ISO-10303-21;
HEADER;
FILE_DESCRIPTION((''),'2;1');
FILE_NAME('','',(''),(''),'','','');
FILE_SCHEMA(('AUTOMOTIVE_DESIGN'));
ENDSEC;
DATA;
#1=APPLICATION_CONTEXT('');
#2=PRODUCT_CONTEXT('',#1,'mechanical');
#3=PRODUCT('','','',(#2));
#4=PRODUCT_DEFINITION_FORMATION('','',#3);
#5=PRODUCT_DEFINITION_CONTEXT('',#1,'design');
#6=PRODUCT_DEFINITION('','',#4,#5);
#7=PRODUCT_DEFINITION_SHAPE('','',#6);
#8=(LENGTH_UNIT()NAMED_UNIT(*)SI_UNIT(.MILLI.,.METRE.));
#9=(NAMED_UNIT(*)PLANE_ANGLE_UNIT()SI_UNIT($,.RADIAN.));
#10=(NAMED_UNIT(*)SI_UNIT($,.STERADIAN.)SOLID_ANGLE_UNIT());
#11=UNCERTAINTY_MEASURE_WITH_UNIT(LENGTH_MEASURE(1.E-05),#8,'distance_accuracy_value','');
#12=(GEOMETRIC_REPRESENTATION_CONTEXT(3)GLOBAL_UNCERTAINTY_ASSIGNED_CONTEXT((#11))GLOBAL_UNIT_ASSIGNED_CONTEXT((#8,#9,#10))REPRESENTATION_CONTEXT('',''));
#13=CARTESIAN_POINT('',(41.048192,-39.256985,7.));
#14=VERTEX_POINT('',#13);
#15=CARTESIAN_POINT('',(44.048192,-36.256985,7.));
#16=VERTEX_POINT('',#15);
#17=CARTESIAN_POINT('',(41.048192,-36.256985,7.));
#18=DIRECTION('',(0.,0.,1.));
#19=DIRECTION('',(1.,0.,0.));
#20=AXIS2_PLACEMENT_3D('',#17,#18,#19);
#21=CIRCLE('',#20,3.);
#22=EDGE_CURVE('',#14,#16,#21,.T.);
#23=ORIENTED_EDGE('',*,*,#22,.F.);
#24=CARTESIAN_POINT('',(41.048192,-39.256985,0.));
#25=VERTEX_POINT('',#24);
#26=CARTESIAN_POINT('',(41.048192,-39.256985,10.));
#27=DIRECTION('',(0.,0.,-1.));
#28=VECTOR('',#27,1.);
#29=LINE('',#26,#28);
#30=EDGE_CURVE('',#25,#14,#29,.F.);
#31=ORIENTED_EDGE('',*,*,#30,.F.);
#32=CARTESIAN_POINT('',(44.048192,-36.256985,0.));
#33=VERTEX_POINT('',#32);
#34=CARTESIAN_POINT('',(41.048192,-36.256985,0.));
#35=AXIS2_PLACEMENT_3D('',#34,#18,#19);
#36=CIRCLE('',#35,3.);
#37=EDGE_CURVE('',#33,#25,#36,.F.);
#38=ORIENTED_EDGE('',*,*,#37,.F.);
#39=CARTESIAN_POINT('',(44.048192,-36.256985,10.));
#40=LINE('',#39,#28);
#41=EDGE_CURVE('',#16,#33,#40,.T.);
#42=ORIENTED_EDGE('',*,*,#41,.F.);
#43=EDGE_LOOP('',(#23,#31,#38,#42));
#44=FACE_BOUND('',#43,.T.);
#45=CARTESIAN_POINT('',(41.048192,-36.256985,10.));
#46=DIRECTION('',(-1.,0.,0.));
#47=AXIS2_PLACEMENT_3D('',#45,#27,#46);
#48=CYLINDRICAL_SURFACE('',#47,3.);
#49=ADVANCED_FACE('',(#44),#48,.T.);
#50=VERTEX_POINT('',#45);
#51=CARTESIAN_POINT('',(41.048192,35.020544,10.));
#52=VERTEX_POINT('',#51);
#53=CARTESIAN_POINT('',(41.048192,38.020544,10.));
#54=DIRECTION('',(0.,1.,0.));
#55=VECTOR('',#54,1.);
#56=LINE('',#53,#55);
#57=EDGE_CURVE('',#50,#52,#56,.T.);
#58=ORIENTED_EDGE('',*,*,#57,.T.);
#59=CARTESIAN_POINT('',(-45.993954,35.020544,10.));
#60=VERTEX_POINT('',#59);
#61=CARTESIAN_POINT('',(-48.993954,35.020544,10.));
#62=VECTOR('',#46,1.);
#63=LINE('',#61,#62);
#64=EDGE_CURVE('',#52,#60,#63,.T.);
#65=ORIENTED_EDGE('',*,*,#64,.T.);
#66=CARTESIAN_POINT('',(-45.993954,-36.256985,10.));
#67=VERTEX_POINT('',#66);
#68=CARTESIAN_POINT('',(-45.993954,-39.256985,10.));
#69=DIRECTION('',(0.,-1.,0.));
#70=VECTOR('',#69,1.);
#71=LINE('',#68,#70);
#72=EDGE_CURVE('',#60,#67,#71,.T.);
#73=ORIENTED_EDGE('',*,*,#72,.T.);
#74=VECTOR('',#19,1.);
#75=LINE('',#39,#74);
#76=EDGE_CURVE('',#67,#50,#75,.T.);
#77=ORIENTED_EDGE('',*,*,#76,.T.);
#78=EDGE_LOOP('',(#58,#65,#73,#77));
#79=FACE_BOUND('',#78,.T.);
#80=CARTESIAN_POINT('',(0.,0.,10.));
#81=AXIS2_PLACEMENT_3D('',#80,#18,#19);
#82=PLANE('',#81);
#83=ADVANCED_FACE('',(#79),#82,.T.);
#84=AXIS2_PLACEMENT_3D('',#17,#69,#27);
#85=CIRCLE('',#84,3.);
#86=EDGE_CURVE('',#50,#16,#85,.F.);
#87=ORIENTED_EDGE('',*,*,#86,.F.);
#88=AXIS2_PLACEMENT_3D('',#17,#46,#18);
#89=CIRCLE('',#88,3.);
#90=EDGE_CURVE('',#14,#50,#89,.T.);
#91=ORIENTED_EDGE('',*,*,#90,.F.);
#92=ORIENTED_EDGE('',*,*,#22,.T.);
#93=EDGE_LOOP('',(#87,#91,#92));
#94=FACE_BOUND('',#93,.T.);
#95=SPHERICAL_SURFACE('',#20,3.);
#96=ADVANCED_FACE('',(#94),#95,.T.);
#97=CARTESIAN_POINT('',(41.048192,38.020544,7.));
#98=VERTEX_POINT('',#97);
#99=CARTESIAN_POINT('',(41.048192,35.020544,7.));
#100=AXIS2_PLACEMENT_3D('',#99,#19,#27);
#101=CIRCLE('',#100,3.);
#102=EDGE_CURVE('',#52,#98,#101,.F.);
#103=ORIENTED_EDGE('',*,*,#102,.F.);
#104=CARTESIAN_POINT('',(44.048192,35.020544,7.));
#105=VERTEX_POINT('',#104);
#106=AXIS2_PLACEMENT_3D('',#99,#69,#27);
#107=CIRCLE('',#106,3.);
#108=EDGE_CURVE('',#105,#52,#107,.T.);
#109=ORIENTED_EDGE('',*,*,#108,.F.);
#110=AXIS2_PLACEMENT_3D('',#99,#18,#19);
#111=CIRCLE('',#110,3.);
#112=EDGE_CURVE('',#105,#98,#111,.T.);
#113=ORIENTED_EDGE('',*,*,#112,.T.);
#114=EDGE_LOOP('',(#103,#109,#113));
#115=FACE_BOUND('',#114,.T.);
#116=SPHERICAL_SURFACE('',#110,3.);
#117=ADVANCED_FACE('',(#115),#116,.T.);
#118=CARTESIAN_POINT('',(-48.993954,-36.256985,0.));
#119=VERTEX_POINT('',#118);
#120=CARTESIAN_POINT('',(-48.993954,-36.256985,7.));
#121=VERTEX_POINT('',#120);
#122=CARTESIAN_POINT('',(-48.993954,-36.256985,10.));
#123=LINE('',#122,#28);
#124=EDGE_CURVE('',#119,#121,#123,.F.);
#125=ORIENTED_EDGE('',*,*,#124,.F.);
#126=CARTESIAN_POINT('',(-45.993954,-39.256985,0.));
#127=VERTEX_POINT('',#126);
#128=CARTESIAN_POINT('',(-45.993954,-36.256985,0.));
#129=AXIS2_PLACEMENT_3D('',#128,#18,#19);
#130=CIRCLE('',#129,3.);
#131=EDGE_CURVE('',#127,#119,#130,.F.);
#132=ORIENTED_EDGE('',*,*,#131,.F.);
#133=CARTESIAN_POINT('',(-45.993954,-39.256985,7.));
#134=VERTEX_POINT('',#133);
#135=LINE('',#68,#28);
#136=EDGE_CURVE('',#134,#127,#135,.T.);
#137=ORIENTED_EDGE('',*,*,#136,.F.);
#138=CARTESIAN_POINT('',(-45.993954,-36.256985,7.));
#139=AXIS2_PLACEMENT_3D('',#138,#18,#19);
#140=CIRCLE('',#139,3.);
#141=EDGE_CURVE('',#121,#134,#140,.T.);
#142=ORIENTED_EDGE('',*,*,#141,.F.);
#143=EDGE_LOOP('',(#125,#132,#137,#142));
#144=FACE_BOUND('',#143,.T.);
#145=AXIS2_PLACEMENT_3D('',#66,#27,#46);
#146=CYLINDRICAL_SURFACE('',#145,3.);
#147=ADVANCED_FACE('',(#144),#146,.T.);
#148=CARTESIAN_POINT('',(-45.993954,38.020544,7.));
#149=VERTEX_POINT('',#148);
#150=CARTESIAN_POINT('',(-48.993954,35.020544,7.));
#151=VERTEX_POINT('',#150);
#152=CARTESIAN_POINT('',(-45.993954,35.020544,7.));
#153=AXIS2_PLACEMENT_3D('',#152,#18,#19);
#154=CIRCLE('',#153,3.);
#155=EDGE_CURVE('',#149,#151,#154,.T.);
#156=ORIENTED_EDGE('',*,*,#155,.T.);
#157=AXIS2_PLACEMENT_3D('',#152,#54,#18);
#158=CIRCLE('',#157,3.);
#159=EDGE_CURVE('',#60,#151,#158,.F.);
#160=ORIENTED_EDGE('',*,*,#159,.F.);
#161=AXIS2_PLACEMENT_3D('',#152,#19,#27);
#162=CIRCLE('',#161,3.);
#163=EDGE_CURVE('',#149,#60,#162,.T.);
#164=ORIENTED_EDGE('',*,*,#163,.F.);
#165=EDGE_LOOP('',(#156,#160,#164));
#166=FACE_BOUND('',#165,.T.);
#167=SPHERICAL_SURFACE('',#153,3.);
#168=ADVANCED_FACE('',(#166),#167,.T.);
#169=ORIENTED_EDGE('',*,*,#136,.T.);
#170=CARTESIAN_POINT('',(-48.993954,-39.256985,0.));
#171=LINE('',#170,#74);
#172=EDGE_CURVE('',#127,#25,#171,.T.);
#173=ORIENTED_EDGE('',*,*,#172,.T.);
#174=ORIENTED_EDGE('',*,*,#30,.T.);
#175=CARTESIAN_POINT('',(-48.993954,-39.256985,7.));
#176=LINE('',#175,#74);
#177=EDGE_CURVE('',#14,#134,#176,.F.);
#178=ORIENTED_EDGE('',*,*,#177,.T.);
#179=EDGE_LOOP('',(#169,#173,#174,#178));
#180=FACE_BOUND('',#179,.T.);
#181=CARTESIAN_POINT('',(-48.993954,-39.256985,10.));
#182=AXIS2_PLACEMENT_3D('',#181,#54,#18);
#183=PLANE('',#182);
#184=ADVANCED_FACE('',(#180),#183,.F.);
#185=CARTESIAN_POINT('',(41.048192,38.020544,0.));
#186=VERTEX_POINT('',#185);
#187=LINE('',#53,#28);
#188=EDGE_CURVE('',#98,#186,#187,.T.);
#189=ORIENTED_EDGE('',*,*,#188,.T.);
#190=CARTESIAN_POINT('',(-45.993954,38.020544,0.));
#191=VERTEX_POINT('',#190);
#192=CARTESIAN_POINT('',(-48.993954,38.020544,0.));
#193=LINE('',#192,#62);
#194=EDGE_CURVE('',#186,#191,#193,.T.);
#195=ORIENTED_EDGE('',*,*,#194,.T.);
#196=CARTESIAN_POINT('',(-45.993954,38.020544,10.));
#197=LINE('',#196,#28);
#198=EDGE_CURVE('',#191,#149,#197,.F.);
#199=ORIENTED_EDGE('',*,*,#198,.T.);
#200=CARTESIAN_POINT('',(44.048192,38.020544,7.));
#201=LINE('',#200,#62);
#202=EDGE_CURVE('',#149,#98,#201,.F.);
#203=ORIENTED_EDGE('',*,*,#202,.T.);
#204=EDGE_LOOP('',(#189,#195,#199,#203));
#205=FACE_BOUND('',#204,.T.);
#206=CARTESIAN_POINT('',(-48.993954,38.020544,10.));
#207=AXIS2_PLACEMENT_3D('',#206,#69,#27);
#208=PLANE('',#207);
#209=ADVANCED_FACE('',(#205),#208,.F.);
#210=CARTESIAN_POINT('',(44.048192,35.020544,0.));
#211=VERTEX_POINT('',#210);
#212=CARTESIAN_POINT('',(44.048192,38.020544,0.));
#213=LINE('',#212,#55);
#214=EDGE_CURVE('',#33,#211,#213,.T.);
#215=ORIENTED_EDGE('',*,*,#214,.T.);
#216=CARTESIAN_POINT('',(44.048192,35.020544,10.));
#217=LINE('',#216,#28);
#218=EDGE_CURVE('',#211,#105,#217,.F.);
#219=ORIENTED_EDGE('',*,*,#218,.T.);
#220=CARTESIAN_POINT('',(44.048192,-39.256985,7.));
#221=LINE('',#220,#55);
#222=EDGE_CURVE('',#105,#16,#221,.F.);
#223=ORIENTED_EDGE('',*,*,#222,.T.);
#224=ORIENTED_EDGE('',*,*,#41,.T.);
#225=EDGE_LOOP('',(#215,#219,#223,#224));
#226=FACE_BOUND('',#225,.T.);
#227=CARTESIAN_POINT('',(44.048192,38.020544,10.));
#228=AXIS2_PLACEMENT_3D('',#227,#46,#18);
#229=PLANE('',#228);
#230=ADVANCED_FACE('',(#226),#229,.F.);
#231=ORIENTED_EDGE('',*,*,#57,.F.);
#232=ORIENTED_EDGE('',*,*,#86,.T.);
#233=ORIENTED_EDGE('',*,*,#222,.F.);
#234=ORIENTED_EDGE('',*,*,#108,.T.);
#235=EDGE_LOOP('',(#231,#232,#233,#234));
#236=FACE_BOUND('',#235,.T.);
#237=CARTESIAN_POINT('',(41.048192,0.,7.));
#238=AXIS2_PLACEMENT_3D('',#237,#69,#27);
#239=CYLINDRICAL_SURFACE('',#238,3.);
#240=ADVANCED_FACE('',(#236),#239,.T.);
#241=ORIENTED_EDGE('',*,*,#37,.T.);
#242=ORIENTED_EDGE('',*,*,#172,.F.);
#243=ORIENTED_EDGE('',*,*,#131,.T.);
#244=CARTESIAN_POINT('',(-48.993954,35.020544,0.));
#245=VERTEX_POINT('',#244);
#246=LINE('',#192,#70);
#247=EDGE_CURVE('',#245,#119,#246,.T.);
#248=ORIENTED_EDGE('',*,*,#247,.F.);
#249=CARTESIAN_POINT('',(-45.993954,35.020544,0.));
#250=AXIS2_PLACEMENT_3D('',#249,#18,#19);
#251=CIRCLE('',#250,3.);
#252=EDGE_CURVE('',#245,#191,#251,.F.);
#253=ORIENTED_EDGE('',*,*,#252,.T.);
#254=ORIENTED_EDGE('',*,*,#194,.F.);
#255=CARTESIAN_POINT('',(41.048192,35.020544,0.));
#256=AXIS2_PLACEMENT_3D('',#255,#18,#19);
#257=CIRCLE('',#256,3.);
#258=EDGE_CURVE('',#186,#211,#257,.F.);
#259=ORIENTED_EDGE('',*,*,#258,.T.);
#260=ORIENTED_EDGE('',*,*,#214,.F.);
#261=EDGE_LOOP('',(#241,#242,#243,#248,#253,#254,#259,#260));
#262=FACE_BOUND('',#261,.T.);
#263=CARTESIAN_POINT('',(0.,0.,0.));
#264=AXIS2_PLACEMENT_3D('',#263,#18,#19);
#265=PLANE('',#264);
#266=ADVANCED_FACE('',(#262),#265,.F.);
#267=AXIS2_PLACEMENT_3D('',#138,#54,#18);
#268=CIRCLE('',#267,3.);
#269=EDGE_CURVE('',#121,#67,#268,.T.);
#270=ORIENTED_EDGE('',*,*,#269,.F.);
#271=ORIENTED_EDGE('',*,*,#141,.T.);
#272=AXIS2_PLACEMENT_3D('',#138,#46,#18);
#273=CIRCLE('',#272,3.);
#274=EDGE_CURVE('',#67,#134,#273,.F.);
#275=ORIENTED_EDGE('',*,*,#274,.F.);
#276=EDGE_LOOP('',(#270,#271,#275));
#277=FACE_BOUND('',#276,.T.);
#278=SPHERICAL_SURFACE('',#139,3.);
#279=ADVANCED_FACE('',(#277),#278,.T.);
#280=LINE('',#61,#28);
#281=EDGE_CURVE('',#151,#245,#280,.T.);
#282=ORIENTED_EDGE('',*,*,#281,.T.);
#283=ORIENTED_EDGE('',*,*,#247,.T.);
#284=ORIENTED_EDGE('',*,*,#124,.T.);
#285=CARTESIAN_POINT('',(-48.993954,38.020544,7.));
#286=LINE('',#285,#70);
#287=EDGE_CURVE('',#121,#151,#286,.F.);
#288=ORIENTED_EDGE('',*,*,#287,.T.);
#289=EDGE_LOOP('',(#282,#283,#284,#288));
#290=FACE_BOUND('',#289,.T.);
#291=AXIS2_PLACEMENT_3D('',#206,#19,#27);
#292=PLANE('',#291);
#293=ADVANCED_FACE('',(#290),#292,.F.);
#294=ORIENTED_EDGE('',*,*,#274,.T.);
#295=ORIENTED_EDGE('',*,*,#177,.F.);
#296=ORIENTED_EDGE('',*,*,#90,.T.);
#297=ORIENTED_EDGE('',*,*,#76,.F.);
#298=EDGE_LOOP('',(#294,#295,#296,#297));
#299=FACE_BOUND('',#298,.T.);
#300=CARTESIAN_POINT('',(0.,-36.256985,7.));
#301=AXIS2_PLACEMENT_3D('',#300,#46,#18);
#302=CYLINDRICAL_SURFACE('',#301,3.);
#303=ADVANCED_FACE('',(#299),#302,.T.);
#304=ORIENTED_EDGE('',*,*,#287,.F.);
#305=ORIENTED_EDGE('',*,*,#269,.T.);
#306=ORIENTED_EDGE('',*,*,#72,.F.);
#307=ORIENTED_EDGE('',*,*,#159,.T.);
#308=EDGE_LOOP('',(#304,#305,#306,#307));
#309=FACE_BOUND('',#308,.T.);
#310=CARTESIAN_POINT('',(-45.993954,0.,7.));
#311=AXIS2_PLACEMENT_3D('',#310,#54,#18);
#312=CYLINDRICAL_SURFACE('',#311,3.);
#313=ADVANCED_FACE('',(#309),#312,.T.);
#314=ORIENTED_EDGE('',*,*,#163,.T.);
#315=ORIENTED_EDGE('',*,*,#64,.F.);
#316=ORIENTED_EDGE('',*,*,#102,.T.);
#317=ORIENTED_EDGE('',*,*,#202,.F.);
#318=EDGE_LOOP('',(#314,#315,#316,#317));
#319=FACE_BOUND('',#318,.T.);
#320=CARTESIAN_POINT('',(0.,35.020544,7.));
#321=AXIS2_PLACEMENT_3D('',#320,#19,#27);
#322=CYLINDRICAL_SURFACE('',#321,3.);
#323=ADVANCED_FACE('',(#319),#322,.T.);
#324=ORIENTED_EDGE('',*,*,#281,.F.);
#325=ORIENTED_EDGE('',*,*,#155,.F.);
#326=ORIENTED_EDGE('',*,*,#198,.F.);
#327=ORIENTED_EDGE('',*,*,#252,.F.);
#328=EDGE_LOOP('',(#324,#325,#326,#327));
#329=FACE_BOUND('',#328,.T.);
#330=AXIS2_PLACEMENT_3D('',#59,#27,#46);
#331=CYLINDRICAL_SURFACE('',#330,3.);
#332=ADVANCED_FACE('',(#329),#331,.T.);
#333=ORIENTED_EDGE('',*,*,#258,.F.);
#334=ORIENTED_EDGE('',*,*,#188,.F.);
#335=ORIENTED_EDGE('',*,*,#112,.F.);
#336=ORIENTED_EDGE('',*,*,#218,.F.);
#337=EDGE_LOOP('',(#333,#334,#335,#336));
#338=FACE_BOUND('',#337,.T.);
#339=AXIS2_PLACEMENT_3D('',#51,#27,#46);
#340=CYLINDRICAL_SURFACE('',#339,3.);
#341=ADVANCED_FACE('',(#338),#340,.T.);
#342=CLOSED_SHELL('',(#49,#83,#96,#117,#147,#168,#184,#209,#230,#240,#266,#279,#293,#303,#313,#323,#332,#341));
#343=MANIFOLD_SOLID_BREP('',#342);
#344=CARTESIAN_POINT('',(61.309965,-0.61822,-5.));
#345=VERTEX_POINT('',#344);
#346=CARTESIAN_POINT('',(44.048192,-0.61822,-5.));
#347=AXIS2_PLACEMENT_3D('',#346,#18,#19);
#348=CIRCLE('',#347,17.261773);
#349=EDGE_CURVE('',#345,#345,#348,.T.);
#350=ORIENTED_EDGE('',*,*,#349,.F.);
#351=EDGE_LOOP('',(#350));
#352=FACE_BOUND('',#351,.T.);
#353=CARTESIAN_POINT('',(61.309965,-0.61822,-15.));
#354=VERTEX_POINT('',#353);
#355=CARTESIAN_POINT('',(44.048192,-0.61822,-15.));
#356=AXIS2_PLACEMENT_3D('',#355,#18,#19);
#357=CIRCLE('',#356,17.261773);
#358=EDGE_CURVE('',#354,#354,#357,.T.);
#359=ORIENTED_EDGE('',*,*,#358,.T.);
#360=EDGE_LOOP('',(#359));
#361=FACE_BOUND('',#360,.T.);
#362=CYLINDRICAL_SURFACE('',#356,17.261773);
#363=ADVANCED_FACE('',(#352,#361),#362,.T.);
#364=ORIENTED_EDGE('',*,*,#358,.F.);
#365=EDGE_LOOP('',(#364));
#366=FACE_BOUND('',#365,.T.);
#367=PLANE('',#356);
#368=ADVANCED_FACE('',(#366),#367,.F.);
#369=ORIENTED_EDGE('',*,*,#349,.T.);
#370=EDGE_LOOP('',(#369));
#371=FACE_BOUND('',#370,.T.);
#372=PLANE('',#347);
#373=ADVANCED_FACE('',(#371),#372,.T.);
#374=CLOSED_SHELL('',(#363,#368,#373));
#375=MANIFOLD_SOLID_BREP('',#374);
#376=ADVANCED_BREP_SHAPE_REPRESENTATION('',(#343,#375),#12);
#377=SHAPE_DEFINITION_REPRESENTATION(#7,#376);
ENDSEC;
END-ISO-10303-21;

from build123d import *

# Parameters (mm, degrees)
F_1_FR_W        = 93.042145165
F_1_FR_H        = 77.277529207
EXTRUDE_1_DEPTH = 10
SKETCH_5_R      = 17.261773312
EXTRUDE_2_DEPTH = 10
FILLET_1_R      = 3
FILLET_2_R      = 3
FILLET_3_R      = 3


with BuildPart() as part:
    # Эскиз1_fr → Бобышка-Вытянуть1 (new body)
    with BuildSketch(Plane.XY):
        with Locations((-2.472880935, -0.618220234)):
            Rectangle(F_1_FR_W, F_1_FR_H)
    extrude(amount=EXTRUDE_1_DEPTH)

    # Скругление1
    fillet_1_edges = [part.edges().sort_by_distance(p)[0] for p in [
        (44.048191648, -0.618220234, 10),
        (-2.472880935, 38.02054437, 10),
        (-48.993953517, -0.618220234, 10),
        (-2.472880935, -39.256984837, 10),
    ]]
    fillet(fillet_1_edges, radius=FILLET_1_R)

    # Скругление2
    # the kernel refuses this fillet: 3 mm, written as the material it takes off along each edge
    with BuildSketch(Plane(origin=(41.048191648, -36.256984837, 7), x_dir=(0, -1, 0), z_dir=(1, 0, 0))) as fillet_2_piece_1_section:
        Polygon((0, 0), (FILLET_2_R, 0), (FILLET_2_R, -FILLET_2_R), (0, -FILLET_2_R), align=None)
    fillet_2_piece_1 = extrude(amount=FILLET_2_R, mode=Mode.PRIVATE)
    fillet_2_piece_1 = fillet_2_piece_1 - Plane(origin=(41.048191648, -36.256984837, 7), x_dir=(0, 0.7071067811865475, -0.7071067811865475), z_dir=(1, 0, 0)) * Sphere(FILLET_2_R, mode=Mode.PRIVATE)
    add(fillet_2_piece_1, mode=Mode.SUBTRACT)
    with BuildSketch(Plane(origin=(44.048191648, -39.256984837, -7.5), x_dir=(0, 1, 0), z_dir=(0, 0, 1))) as fillet_2_piece_2:
        with BuildLine():
            CenterArc((FILLET_2_R, FILLET_2_R), FILLET_2_R, 180, 90)
            Line((0, FILLET_2_R), (0, 0))
            Line((0, 0), (FILLET_2_R, 0))
        make_face()
    extrude(amount=14.5, mode=Mode.SUBTRACT)

    # Скругление3
    # the kernel refuses this fillet: 3 mm, written as the material it takes off along each edge
    with BuildSketch(Plane(origin=(-45.993953517, -36.256984837, 7), x_dir=(0, -1, 0), z_dir=(-1, 0, 0))) as fillet_3_piece_1_section:
        Polygon((0, 0), (FILLET_3_R, 0), (FILLET_3_R, FILLET_3_R), (0, FILLET_3_R), align=None)
    fillet_3_piece_1 = extrude(amount=FILLET_3_R, mode=Mode.PRIVATE)
    fillet_3_piece_1 = fillet_3_piece_1 - Plane(origin=(-45.993953517, -36.256984837, 7), x_dir=(0, 0.7071067811865475, -0.7071067811865475), z_dir=(-1, 0, 0)) * Sphere(FILLET_3_R, mode=Mode.PRIVATE)
    add(fillet_3_piece_1, mode=Mode.SUBTRACT)
    with BuildSketch(Plane(origin=(41.048191648, 35.02054437, 7), x_dir=(1, 0, 0), z_dir=(0, 1, 0))) as fillet_3_piece_2_section:
        Polygon((0, 0), (FILLET_3_R, 0), (FILLET_3_R, -FILLET_3_R), (0, -FILLET_3_R), align=None)
    fillet_3_piece_2 = extrude(amount=FILLET_3_R, mode=Mode.PRIVATE)
    fillet_3_piece_2 = fillet_3_piece_2 - Plane(origin=(41.048191648, 35.02054437, 7), x_dir=(-0.7071067811865475, 0, -0.7071067811865475), z_dir=(0, 1, 0)) * Sphere(FILLET_3_R, mode=Mode.PRIVATE)
    add(fillet_3_piece_2, mode=Mode.SUBTRACT)
    with BuildSketch(Plane(origin=(-45.993953517, 35.02054437, 7), x_dir=(-1, 0, 0), z_dir=(0, 1, 0))) as fillet_3_piece_3_section:
        Polygon((0, 0), (FILLET_3_R, 0), (FILLET_3_R, FILLET_3_R), (0, FILLET_3_R), align=None)
    fillet_3_piece_3 = extrude(amount=FILLET_3_R, mode=Mode.PRIVATE)
    fillet_3_piece_3 = fillet_3_piece_3 - Plane(origin=(-45.993953517, 35.02054437, 7), x_dir=(0.7071067811865475, 0, -0.7071067811865475), z_dir=(0, 1, 0)) * Sphere(FILLET_3_R, mode=Mode.PRIVATE)
    add(fillet_3_piece_3, mode=Mode.SUBTRACT)
    with BuildSketch(Plane(origin=(-48.993953517, 38.02054437, -7.5), x_dir=(1, 0, 0), z_dir=(0, 0, 1)), Plane(origin=(-48.993953517, -39.256984837, -7.5), x_dir=(0, 1, 0), z_dir=(0, 0, 1))) as fillet_3_piece_4:
        with BuildLine():
            CenterArc((FILLET_3_R, -FILLET_3_R), FILLET_3_R, 90, 90)
            Line((0, -FILLET_3_R), (0, 0))
            Line((0, 0), (FILLET_3_R, 0))
        make_face()
    extrude(amount=14.5, mode=Mode.SUBTRACT)
    with BuildSketch(Plane(origin=(44.048191648, 38.02054437, -7.5), x_dir=(-1, 0, 0), z_dir=(0, 0, 1))) as fillet_3_piece_5:
        with BuildLine():
            CenterArc((FILLET_3_R, FILLET_3_R), FILLET_3_R, 180, 90)
            Line((0, FILLET_3_R), (0, 0))
            Line((0, 0), (FILLET_3_R, 0))
        make_face()
    extrude(amount=14.5, mode=Mode.SUBTRACT)


with BuildPart() as body_2:
    # Эскиз5 → Бобышка-Вытянуть2 (new body)
    with BuildSketch(Plane.XY.offset(-5)):
        with Locations((44.048191648, -0.618220234)):
            Circle(SKETCH_5_R)
    extrude(amount=-EXTRUDE_2_DEPTH)


solid = Compound([part.part, body_2.part])
